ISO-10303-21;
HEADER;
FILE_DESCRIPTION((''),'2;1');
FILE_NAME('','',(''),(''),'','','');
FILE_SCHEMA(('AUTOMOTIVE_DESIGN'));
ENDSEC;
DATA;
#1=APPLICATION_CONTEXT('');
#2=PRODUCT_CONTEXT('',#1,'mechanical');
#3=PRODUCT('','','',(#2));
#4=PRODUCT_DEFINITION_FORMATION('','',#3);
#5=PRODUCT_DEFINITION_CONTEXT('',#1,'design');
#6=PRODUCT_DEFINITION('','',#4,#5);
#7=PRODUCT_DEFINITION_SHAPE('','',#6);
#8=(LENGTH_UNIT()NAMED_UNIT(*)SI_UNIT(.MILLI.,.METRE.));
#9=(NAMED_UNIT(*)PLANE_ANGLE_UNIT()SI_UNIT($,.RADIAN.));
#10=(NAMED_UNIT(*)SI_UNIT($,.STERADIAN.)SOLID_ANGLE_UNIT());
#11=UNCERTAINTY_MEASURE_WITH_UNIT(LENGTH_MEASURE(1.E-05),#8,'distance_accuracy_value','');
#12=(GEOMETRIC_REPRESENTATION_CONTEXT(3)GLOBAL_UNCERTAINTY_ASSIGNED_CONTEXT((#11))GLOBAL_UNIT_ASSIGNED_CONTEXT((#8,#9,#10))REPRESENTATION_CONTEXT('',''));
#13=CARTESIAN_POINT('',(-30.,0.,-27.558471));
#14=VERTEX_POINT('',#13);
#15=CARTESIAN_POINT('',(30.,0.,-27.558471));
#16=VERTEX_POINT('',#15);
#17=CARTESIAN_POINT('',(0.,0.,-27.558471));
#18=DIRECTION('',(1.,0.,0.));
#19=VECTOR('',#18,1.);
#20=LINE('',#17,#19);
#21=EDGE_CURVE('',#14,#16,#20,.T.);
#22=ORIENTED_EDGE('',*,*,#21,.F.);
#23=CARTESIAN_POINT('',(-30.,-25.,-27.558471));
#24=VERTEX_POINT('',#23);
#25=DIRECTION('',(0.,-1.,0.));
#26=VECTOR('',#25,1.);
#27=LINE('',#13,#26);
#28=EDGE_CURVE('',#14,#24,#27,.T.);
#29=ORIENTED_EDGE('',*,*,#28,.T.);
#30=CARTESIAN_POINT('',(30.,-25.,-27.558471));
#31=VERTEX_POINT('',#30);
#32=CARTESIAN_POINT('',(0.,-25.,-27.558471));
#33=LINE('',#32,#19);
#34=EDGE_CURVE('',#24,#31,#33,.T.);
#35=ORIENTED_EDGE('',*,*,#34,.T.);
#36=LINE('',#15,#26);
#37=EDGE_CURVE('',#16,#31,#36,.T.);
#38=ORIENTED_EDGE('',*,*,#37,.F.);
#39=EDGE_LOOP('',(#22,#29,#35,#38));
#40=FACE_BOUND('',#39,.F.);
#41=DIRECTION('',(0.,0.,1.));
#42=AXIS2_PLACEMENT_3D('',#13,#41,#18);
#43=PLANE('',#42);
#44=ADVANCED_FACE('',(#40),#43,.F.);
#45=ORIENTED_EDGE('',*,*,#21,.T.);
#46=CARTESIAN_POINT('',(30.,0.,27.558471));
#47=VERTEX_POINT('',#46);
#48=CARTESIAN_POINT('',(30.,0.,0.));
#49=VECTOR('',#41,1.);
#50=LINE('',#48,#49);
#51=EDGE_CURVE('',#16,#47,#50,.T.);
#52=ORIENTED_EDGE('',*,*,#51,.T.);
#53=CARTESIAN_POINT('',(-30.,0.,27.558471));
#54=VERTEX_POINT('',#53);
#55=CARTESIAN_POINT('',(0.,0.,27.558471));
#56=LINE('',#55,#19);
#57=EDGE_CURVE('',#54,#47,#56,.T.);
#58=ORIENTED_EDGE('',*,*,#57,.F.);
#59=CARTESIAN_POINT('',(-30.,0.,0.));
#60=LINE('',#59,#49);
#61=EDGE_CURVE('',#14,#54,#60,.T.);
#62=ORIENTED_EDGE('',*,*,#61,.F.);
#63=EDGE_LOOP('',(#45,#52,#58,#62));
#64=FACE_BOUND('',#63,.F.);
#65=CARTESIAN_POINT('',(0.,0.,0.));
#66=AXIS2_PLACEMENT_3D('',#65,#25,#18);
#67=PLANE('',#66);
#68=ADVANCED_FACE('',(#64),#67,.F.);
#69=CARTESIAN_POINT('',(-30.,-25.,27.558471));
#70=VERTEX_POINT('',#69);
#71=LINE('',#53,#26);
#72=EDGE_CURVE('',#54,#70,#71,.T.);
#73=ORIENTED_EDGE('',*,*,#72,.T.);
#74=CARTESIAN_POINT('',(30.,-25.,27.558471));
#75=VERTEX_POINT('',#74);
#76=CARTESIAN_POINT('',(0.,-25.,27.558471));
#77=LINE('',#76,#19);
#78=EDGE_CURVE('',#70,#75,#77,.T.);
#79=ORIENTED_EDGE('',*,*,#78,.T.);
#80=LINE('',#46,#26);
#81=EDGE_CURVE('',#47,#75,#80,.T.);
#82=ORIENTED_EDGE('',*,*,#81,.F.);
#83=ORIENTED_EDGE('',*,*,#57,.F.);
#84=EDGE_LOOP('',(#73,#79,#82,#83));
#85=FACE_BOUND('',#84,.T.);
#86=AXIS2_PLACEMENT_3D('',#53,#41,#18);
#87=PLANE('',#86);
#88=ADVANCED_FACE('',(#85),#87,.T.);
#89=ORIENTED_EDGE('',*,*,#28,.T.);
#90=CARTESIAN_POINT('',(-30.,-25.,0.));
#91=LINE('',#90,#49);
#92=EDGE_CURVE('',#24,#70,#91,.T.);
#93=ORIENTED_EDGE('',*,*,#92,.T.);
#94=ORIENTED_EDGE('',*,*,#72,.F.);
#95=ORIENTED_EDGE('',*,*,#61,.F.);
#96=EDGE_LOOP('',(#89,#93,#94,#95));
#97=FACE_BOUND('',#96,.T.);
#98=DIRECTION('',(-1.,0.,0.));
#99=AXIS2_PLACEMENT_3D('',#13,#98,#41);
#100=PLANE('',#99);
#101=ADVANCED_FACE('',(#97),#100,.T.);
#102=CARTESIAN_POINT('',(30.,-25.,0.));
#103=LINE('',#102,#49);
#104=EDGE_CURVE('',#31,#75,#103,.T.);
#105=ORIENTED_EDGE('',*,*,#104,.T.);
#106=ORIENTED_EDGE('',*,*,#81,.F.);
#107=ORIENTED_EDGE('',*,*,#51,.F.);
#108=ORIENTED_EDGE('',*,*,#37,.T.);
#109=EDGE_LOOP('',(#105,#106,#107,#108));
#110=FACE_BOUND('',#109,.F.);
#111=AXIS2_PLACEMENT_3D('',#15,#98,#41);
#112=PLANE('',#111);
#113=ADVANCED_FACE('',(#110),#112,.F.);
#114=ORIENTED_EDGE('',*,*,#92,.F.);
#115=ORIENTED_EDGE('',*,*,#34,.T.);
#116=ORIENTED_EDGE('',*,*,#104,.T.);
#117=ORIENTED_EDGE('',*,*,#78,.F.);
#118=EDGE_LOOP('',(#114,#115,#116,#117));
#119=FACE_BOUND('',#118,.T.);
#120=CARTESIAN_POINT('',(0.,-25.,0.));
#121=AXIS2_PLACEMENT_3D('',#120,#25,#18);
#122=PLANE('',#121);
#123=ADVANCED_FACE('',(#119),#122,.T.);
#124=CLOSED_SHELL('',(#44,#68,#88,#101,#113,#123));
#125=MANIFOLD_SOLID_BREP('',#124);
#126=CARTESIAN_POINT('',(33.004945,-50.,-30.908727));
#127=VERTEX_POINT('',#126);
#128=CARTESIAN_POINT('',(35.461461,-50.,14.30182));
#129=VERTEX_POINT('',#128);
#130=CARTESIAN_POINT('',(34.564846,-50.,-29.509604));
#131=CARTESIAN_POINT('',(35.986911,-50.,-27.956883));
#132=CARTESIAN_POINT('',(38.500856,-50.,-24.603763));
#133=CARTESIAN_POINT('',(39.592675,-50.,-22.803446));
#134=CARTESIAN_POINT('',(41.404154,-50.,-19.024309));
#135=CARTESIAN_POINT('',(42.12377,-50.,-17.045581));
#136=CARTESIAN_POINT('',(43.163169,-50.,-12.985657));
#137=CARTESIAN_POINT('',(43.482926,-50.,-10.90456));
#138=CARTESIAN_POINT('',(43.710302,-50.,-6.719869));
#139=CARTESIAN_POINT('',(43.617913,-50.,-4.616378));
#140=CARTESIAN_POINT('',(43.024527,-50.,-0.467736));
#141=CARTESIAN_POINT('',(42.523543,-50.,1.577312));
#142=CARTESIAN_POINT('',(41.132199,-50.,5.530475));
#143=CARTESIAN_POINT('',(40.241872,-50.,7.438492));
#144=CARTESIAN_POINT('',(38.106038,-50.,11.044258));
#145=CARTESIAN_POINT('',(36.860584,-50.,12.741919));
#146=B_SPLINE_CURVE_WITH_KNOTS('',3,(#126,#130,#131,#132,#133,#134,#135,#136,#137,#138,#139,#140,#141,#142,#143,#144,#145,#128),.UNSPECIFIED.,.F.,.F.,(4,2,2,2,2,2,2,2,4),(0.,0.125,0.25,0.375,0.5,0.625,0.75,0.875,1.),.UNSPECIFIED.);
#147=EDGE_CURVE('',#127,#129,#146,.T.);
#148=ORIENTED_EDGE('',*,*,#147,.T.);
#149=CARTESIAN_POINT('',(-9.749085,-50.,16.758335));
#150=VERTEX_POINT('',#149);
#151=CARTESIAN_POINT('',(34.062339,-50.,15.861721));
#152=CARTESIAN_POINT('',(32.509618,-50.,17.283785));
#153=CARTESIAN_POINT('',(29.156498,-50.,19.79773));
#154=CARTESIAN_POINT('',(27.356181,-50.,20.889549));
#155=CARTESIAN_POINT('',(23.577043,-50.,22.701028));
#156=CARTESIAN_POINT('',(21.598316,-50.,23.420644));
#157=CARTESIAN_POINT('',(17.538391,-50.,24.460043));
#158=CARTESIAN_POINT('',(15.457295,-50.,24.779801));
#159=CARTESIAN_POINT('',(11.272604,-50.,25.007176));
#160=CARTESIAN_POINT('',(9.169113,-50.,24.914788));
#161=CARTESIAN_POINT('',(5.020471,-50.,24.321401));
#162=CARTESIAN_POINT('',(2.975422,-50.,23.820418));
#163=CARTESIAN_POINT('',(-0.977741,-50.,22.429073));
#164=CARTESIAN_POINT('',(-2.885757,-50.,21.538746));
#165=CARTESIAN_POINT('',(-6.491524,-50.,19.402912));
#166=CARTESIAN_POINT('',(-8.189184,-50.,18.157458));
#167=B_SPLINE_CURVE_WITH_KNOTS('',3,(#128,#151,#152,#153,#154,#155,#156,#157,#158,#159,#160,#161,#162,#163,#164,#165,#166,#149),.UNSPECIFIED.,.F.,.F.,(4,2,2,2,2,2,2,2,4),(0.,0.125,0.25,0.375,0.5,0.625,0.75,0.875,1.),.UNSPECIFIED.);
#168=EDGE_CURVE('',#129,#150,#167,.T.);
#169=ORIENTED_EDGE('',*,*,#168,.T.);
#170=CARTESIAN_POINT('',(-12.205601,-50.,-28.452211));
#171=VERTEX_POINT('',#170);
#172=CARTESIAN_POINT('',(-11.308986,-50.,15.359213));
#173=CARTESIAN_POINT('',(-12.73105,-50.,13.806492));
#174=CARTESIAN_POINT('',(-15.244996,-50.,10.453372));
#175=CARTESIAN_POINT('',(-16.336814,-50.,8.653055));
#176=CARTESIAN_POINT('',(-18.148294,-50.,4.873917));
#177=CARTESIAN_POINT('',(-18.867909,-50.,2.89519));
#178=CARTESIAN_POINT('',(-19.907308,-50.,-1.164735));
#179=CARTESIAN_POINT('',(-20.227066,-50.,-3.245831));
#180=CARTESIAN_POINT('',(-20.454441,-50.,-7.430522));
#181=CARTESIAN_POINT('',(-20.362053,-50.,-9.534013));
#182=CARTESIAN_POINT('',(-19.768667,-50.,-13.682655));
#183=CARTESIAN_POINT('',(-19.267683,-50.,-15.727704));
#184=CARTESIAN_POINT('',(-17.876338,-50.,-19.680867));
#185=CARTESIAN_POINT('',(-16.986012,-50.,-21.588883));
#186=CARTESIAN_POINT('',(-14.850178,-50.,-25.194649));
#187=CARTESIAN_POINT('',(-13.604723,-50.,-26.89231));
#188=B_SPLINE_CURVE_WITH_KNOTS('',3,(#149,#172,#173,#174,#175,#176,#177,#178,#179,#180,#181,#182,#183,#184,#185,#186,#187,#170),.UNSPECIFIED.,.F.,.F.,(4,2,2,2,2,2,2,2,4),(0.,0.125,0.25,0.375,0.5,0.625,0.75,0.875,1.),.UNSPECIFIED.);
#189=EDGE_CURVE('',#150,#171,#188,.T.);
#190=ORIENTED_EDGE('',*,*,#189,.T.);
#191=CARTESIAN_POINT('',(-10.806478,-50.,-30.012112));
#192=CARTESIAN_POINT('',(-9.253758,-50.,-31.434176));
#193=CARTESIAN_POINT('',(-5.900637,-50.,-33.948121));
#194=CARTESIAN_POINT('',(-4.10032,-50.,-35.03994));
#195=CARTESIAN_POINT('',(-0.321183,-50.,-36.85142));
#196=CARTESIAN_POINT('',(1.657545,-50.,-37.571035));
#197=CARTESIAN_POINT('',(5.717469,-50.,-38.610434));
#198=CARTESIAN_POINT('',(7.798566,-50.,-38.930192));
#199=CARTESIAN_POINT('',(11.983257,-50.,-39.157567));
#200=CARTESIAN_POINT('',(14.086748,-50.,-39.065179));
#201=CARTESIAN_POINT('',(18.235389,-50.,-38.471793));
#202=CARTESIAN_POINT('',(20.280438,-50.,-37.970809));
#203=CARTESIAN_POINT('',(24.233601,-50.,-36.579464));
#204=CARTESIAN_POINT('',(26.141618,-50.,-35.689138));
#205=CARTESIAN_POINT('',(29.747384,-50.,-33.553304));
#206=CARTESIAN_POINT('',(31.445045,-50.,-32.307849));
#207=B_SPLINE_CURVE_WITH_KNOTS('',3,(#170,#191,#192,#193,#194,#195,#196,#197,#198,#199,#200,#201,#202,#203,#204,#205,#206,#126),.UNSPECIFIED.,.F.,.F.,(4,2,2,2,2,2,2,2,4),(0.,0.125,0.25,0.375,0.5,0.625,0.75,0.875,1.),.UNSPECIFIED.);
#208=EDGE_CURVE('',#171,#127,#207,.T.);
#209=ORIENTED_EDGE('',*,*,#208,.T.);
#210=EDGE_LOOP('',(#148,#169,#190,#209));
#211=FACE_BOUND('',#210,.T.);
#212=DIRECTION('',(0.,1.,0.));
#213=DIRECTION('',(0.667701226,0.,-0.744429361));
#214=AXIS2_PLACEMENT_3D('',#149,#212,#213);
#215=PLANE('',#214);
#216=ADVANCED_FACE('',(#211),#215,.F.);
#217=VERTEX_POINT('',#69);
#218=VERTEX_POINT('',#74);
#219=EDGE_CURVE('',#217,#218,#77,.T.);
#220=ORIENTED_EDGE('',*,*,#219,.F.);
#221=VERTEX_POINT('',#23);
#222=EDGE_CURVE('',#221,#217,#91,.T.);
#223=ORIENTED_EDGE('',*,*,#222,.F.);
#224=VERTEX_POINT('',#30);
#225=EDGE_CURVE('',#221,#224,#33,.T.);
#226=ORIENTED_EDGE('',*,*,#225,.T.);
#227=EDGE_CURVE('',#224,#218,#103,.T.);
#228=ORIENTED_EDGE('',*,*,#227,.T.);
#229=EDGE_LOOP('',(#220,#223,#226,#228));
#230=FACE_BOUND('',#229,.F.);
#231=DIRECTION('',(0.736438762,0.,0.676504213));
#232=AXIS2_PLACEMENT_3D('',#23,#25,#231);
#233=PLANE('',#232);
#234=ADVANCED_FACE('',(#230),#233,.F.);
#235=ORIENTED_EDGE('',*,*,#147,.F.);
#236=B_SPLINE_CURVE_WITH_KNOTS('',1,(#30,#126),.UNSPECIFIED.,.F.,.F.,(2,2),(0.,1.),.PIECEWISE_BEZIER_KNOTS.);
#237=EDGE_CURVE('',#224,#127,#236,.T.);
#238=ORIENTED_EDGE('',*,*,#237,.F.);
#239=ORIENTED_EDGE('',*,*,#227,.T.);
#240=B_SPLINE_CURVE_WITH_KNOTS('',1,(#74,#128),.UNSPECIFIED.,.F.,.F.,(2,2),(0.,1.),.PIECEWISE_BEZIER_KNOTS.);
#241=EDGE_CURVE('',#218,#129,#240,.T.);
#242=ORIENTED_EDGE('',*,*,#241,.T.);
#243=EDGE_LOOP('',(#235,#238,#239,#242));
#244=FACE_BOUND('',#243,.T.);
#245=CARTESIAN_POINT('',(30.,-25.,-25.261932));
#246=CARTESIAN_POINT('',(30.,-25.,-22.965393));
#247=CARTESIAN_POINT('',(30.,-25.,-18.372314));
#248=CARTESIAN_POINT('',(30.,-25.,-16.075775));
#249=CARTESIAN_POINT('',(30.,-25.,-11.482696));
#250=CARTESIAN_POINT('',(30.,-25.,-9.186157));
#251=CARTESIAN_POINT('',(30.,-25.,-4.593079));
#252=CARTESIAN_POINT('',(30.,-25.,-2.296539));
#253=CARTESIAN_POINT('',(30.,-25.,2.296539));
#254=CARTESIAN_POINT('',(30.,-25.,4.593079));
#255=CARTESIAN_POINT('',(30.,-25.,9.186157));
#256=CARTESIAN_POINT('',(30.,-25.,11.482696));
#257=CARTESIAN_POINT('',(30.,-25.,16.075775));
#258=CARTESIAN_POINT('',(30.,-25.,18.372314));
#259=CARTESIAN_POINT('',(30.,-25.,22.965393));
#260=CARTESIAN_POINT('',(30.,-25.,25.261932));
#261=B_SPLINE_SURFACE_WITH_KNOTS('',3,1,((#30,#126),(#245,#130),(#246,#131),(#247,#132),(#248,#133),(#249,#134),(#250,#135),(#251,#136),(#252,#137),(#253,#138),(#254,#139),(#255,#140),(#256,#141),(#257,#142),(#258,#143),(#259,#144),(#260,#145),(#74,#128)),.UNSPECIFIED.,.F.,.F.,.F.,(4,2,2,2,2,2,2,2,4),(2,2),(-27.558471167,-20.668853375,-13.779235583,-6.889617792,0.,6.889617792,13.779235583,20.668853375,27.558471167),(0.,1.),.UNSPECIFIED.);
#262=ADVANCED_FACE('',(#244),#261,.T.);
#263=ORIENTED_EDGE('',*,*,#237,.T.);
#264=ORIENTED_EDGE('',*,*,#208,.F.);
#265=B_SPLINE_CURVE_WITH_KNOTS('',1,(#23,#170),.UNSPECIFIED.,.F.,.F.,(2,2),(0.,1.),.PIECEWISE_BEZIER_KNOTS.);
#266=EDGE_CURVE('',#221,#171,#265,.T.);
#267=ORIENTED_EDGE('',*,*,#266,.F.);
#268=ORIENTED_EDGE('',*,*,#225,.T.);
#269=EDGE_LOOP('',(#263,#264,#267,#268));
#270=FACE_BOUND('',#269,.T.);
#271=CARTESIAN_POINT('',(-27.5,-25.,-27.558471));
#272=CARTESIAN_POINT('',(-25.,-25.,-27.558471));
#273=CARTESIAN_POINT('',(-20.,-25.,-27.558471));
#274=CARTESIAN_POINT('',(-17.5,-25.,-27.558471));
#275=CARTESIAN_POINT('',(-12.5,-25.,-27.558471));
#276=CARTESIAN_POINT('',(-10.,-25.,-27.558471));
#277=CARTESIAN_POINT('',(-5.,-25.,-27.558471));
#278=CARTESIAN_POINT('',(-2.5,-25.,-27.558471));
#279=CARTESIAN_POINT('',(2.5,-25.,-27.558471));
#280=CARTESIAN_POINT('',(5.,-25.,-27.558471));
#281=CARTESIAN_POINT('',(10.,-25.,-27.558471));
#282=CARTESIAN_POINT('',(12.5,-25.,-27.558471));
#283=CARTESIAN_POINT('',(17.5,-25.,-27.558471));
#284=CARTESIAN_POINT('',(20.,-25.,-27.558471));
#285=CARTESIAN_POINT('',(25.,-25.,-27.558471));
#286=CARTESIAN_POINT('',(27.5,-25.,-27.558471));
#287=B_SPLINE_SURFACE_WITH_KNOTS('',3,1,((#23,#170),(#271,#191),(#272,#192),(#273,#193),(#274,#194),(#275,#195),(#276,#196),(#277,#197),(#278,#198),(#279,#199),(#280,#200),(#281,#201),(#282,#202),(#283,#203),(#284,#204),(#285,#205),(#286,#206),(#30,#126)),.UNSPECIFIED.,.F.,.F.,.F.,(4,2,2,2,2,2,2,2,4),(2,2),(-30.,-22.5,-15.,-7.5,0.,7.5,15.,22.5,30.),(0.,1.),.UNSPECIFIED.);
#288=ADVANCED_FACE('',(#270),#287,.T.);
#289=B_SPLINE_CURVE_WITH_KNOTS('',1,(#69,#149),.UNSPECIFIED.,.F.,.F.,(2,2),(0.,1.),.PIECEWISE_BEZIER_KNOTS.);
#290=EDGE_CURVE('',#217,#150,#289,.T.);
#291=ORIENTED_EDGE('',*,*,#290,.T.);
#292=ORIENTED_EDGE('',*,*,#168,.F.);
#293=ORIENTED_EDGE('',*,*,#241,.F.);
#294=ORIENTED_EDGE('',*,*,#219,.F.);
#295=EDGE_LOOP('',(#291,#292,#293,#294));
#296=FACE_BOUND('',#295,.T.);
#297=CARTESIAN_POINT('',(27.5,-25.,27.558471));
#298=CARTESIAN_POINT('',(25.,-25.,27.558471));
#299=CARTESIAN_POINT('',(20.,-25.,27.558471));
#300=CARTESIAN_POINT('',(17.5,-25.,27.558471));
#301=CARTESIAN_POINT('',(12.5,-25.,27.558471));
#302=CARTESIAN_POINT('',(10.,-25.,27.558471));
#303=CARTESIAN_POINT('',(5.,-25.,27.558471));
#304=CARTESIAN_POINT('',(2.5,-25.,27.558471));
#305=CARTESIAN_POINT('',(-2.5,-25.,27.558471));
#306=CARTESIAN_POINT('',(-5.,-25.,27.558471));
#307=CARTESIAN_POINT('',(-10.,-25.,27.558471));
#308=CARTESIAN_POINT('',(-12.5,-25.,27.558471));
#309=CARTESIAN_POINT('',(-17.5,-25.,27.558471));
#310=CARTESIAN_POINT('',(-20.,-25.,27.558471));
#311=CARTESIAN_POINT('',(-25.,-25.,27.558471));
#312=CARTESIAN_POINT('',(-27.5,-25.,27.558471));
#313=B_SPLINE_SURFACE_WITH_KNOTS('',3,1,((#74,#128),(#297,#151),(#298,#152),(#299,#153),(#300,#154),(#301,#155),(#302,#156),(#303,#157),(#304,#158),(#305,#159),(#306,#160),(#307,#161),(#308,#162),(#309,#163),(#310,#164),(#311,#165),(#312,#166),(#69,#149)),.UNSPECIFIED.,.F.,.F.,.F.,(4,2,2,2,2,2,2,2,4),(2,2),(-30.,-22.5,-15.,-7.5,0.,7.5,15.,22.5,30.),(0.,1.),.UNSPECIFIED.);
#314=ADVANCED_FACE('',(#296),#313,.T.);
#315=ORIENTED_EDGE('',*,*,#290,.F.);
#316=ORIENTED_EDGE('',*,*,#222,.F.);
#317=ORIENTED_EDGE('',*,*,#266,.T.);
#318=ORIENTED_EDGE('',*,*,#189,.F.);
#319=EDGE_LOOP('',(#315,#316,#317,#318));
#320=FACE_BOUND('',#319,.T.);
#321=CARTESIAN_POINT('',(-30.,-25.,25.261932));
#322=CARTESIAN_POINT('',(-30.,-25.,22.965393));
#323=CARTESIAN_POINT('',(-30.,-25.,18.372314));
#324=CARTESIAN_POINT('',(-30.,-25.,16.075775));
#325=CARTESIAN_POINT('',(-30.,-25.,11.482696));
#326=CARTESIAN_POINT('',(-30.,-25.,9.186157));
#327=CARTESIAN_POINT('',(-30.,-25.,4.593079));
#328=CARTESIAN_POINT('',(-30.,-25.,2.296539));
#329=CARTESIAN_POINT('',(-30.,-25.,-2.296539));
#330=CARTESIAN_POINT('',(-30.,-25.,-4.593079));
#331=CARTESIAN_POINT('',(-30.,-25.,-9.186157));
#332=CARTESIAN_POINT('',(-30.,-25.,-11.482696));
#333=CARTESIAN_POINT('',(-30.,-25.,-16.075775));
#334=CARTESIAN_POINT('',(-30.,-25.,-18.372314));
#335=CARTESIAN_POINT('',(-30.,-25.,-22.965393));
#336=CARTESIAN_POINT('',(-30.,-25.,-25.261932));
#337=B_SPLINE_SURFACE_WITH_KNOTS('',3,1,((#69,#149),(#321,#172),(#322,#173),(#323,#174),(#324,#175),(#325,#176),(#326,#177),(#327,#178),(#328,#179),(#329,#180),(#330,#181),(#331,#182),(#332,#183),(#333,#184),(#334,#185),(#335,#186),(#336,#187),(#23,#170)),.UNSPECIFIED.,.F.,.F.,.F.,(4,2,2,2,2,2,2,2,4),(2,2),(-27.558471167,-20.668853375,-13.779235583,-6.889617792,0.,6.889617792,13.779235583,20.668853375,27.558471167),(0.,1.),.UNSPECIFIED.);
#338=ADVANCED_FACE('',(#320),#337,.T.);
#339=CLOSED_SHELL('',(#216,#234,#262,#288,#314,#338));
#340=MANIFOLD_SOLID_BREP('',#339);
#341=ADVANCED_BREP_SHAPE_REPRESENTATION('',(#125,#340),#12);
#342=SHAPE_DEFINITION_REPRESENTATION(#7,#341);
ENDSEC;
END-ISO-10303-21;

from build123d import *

# Parameters (mm, degrees)
F0_W      = 60
F0_H      = 55.1169423331
F1_DEPTH  = 25
F1_FACE_W = 60
F1_FACE_H = 55.1169423331


# Not quite as in the source:
# - the arcs of a loft's sections are written as splines that run evenly, so that the points pair up as in the source's solid


with BuildPart() as f1:
    # F0 (on Front) → F1 (new body)
    with BuildSketch(Plane.XZ):
        Rectangle(F0_W, F0_H)
    extrude(amount=F1_DEPTH)


with BuildPart() as f4:
    # F1_face (on face) → F4 section 0
    with BuildSketch(Plane.XZ.offset(25)):
        Rectangle(F1_FACE_W, F1_FACE_H)
    # F3 (on offset) → F4 section 1
    with BuildSketch(Plane.XZ.offset(50)):
        with BuildLine():
            add(Edge.make_bspline(
                [(33.0049454892, -30.9087265839), (34.5648464401, -29.509604206), (35.9869107002, -27.9568833895), (38.5008560126, -24.6037629645), (39.5926749027, -22.8034462686), (41.4041541174, -19.0243087118), (42.1237696497, -17.0455812976), (43.1631686363, -12.985656746), (43.4829263895, -10.9045599983), (43.7103016279, -6.7198690755), (43.6179134909, -4.6163783752), (43.0245270782, -0.4677364066), (42.5235434753, 1.5773122783), (41.1321989185, 5.5304753085), (40.2418723685, 7.4384919039), (38.1060382588, 11.0442581573), (36.8605835118, 12.7419186555), (35.4614611339, 14.3018196063)],
                knots=[0, 0, 0, 0, 0.125, 0.125, 0.25, 0.25, 0.375, 0.375, 0.5, 0.5, 0.625, 0.625, 0.75, 0.75, 0.875, 0.875, 1, 1, 1, 1], degree=3))
            add(Edge.make_bspline(
                [(35.4614611339, 14.3018196063), (34.0623387561, 15.8617205572), (32.5096179395, 17.2837848173), (29.1564975146, 19.7977301297), (27.3561808187, 20.8895490198), (23.5770432619, 22.7010282345), (21.5983158477, 23.4206437668), (17.5383912961, 24.4600427534), (15.4572945483, 24.7798005066), (11.2726036256, 25.0071757451), (9.1691129253, 24.914787608), (5.0204709567, 24.3214011953), (2.9754222718, 23.8204175924), (-0.9777407584, 22.4290730356), (-2.8857573538, 21.5387464856), (-6.4915236072, 19.4029123759), (-8.1891841054, 18.1574576289), (-9.7490850563, 16.7583352511)],
                knots=[0, 0, 0, 0, 0.125, 0.125, 0.25, 0.25, 0.375, 0.375, 0.5, 0.5, 0.625, 0.625, 0.75, 0.75, 0.875, 0.875, 1, 1, 1, 1], degree=3))
            add(Edge.make_bspline(
                [(-9.7490850563, 16.7583352511), (-11.3089860071, 15.3592128732), (-12.7310502672, 13.8064920567), (-15.2449955797, 10.4533716317), (-16.3368144697, 8.6530549358), (-18.1482936844, 4.873917379), (-18.8679092167, 2.8951899648), (-19.9073082033, -1.1647345868), (-20.2270659565, -3.2458313345), (-20.454441195, -7.4305222573), (-20.3620530579, -9.5340129576), (-19.7686666453, -13.6826549262), (-19.2676830423, -15.7277036111), (-17.8763384856, -19.6808666413), (-16.9860119356, -21.5888832367), (-14.8501778258, -25.1946494901), (-13.6047230788, -26.8923099883), (-12.205600701, -28.4522109391)],
                knots=[0, 0, 0, 0, 0.125, 0.125, 0.25, 0.25, 0.375, 0.375, 0.5, 0.5, 0.625, 0.625, 0.75, 0.75, 0.875, 0.875, 1, 1, 1, 1], degree=3))
            add(Edge.make_bspline(
                [(-12.205600701, -28.4522109391), (-10.8064783231, -30.01211189), (-9.2537575066, -31.4341761501), (-5.9006370816, -33.9481214625), (-4.1003203857, -35.0399403526), (-0.321182829, -36.8514195673), (1.6575445853, -37.5710350996), (5.7174691369, -38.6104340862), (7.7985658846, -38.9301918394), (11.9832568074, -39.1575670779), (14.0867475077, -39.0651789408), (18.2353894763, -38.4717925281), (20.2804381612, -37.9708089252), (24.2336011913, -36.5794643685), (26.1416177868, -35.6891378184), (29.7473840402, -33.5533037087), (31.4450445384, -32.3078489617), (33.0049454892, -30.9087265839)],
                knots=[0, 0, 0, 0, 0.125, 0.125, 0.25, 0.25, 0.375, 0.375, 0.5, 0.5, 0.625, 0.625, 0.75, 0.75, 0.875, 0.875, 1, 1, 1, 1], degree=3))
        make_face()
    loft(ruled=True)


solid = Compound([f1.part, f4.part])
